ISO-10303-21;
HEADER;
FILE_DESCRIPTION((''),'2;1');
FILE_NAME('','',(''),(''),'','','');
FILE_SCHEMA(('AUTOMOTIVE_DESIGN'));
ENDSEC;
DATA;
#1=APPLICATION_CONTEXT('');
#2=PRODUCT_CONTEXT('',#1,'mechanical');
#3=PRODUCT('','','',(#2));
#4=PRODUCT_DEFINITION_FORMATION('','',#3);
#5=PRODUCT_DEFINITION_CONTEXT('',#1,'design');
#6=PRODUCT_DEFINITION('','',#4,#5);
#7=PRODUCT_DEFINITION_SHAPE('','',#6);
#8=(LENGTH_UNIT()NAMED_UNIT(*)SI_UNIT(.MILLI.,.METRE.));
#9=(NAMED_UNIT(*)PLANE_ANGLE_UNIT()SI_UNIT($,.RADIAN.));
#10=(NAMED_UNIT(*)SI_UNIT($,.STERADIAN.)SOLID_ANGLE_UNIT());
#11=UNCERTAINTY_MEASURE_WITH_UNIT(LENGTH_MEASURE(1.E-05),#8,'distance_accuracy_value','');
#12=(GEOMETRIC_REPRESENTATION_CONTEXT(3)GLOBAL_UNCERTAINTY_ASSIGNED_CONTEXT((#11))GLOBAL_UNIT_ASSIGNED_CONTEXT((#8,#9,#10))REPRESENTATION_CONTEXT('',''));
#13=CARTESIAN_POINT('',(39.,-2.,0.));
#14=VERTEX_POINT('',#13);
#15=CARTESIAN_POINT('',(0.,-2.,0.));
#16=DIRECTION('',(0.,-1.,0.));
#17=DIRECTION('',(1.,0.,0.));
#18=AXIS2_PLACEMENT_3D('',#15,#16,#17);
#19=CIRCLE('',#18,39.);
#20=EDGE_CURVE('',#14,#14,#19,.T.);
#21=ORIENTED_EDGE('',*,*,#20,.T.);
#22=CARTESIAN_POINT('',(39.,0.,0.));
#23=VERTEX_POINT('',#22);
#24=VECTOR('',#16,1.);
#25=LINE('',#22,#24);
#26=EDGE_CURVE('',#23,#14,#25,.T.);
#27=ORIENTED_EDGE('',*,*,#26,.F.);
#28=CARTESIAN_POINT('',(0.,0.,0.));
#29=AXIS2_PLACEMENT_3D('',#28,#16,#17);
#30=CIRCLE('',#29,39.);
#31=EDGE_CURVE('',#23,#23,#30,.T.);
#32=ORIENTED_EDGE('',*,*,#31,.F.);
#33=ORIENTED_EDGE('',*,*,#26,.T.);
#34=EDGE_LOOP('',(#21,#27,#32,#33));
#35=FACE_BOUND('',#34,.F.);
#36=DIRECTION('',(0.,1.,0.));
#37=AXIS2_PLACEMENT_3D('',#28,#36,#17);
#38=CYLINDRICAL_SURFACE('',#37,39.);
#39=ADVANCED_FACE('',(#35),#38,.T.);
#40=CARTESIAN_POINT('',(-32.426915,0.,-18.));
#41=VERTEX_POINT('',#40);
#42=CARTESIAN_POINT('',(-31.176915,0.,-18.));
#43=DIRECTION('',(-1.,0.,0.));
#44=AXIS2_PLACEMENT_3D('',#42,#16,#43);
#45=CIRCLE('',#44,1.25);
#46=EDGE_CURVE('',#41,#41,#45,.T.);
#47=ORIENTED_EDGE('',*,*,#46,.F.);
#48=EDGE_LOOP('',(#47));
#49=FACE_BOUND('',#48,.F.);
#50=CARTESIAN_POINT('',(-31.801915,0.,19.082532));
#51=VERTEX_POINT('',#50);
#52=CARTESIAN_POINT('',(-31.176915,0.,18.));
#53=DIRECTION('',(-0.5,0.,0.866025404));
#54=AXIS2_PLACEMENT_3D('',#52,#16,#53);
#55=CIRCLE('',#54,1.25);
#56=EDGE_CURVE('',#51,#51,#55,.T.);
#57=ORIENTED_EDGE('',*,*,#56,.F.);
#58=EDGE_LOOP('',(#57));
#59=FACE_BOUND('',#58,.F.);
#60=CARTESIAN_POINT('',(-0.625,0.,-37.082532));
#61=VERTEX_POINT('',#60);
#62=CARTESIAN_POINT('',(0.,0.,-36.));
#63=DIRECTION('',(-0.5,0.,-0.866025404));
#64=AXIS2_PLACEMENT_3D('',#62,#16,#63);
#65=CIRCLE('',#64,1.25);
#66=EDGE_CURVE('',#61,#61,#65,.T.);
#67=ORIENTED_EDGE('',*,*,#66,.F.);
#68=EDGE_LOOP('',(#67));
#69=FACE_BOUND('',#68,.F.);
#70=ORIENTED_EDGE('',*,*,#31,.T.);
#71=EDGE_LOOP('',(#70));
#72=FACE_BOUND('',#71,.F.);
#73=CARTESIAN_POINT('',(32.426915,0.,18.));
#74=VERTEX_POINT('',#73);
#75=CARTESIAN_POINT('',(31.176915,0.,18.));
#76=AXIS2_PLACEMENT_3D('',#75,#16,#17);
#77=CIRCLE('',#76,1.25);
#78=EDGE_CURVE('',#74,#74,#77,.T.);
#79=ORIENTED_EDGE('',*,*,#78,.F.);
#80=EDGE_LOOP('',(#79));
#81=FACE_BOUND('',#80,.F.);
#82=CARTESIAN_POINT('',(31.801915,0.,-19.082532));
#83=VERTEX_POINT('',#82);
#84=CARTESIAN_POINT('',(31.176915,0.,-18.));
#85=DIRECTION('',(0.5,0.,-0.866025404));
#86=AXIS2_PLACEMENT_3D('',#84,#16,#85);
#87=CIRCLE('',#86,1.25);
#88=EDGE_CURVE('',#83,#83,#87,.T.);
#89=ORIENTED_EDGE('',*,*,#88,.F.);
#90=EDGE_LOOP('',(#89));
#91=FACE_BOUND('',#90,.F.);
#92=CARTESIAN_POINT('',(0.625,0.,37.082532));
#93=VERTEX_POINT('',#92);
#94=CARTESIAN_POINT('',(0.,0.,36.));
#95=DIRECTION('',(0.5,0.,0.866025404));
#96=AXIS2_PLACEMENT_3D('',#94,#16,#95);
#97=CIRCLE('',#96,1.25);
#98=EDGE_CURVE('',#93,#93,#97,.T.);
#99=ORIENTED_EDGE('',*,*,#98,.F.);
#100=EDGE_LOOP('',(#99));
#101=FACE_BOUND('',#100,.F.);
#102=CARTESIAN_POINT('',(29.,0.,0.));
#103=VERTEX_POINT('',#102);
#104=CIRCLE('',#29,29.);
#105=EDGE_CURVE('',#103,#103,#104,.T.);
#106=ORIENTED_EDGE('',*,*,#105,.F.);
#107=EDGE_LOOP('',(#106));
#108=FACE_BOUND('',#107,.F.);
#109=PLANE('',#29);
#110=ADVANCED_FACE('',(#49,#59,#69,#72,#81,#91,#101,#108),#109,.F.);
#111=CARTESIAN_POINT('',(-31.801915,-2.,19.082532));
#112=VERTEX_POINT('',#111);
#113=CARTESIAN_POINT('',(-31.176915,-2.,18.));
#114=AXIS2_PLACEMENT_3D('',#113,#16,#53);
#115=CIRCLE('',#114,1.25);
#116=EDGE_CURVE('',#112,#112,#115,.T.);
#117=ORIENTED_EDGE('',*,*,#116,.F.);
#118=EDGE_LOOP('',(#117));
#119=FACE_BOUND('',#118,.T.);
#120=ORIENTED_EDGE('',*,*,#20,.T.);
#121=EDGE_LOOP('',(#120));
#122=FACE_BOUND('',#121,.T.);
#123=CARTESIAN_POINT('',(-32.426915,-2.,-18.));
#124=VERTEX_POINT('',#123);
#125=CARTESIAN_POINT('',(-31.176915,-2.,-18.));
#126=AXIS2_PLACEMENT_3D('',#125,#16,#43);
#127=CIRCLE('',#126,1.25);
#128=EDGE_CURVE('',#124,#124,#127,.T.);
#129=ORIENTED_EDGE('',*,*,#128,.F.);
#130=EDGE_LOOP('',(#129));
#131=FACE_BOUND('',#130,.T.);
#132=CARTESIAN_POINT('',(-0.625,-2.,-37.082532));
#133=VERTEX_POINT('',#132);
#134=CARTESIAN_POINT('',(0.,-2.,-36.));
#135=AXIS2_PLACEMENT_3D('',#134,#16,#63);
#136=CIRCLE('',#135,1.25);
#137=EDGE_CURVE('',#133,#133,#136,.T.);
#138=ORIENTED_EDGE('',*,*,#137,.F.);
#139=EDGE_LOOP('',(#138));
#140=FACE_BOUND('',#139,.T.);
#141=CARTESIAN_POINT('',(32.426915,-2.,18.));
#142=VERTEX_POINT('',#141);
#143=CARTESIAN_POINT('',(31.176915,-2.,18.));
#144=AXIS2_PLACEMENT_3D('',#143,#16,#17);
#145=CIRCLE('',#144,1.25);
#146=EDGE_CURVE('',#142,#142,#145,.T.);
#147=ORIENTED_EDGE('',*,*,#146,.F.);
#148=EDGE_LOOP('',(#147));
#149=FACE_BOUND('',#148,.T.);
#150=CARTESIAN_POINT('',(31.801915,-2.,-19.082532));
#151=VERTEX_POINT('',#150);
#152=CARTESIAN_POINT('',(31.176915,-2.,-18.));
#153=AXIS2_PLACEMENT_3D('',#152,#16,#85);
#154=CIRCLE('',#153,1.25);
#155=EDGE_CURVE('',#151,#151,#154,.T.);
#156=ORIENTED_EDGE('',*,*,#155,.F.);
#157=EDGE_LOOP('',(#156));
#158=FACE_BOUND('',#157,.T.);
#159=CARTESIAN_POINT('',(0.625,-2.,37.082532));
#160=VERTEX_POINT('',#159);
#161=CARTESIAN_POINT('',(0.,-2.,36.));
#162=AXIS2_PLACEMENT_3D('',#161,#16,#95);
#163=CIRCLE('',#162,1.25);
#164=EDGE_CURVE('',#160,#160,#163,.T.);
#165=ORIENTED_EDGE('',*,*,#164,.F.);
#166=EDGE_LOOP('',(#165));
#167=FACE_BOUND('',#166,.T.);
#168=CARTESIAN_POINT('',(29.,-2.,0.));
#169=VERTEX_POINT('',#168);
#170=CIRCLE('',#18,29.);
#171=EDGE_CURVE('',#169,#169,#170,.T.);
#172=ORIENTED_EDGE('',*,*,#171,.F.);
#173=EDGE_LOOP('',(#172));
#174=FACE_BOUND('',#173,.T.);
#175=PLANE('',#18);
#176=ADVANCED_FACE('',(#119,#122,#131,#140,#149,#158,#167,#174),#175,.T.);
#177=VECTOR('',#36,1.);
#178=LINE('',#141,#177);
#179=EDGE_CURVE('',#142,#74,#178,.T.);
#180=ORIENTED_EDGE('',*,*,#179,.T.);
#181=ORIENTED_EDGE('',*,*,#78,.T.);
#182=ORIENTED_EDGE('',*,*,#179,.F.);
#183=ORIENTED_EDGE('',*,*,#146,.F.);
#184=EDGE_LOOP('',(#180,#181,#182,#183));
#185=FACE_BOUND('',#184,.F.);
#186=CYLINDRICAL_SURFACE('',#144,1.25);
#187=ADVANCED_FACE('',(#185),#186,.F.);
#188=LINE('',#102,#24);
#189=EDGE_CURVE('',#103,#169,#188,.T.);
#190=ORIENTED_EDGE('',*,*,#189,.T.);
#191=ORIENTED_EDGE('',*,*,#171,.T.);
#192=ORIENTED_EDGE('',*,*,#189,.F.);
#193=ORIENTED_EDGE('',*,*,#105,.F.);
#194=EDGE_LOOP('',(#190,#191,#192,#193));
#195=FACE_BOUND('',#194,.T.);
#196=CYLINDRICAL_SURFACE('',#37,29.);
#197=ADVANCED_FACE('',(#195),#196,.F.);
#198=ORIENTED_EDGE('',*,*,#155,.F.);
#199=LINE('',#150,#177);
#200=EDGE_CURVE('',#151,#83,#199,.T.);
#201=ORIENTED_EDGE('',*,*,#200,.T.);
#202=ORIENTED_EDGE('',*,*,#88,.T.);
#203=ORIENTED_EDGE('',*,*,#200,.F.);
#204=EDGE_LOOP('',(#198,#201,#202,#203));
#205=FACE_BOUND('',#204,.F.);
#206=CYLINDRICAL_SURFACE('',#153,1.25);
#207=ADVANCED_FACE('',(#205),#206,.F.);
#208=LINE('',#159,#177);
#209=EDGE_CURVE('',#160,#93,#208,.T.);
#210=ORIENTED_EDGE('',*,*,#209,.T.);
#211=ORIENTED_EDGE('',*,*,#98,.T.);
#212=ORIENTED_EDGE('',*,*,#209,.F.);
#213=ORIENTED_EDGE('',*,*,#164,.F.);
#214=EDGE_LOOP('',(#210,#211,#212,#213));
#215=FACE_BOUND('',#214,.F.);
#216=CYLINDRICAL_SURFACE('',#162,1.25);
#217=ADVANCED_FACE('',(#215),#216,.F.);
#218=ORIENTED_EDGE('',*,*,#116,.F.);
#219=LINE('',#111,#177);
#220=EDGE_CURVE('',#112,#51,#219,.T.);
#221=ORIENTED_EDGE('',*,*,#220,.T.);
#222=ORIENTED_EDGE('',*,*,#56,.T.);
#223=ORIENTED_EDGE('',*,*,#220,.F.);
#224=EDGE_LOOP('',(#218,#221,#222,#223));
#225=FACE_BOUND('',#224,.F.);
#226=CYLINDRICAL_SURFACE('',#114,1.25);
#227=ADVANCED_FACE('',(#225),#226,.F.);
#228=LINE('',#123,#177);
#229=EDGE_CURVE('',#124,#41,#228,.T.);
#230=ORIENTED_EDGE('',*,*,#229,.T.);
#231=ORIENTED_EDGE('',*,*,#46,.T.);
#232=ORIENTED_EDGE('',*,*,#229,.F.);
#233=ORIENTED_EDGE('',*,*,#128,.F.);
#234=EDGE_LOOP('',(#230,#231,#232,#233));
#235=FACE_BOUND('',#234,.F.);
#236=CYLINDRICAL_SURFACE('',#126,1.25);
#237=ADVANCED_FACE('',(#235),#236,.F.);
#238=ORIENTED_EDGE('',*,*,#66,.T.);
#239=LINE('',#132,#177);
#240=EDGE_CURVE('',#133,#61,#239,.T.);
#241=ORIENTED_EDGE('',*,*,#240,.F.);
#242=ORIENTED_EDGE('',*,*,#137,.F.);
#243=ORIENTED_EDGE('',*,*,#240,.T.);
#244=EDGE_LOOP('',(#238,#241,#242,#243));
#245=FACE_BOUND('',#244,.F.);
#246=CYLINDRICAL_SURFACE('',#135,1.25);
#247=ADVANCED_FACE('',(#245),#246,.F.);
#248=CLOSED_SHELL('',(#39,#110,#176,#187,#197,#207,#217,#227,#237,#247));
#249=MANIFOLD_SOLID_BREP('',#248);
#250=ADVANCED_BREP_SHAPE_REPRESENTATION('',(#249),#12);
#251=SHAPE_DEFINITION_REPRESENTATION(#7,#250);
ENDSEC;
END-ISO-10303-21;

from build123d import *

# Parameters (mm, degrees)
F0_R            = 39
F0_R_2          = 29
F1_DEPTH        = 2
F2_R            = 1.25
F3_DEPTH        = 2.001
F3_COPIES_COUNT = 6


# Not quite as in the source:
# - a pattern or mirror of a feature is missing from the dataset's text; its kind, count and spacing are read off the source's solid


with BuildPart() as f1:
    # F0 (on Front) → F1 (new body)
    with BuildSketch(Plane.XZ):
        Circle(F0_R)
        Circle(F0_R_2, mode=Mode.SUBTRACT)
    extrude(amount=F1_DEPTH)

    # F2 (on face) → F3 (cut, through all)
    with BuildSketch(Plane.XZ.offset(2)):
        with Locations((31.1769145362, 18)):
            Circle(F2_R)
    f3 = extrude(amount=-F3_DEPTH, mode=Mode.SUBTRACT)

    # F3_copies: F3 ×6 about axis
    f3_copies_axis = Axis((0, 0, 0), (0, 1, 0))
    for i in range(1, F3_COPIES_COUNT):
        add(f3.rotate(f3_copies_axis, i * 360 / F3_COPIES_COUNT), mode=Mode.SUBTRACT)


solid = f1.part
